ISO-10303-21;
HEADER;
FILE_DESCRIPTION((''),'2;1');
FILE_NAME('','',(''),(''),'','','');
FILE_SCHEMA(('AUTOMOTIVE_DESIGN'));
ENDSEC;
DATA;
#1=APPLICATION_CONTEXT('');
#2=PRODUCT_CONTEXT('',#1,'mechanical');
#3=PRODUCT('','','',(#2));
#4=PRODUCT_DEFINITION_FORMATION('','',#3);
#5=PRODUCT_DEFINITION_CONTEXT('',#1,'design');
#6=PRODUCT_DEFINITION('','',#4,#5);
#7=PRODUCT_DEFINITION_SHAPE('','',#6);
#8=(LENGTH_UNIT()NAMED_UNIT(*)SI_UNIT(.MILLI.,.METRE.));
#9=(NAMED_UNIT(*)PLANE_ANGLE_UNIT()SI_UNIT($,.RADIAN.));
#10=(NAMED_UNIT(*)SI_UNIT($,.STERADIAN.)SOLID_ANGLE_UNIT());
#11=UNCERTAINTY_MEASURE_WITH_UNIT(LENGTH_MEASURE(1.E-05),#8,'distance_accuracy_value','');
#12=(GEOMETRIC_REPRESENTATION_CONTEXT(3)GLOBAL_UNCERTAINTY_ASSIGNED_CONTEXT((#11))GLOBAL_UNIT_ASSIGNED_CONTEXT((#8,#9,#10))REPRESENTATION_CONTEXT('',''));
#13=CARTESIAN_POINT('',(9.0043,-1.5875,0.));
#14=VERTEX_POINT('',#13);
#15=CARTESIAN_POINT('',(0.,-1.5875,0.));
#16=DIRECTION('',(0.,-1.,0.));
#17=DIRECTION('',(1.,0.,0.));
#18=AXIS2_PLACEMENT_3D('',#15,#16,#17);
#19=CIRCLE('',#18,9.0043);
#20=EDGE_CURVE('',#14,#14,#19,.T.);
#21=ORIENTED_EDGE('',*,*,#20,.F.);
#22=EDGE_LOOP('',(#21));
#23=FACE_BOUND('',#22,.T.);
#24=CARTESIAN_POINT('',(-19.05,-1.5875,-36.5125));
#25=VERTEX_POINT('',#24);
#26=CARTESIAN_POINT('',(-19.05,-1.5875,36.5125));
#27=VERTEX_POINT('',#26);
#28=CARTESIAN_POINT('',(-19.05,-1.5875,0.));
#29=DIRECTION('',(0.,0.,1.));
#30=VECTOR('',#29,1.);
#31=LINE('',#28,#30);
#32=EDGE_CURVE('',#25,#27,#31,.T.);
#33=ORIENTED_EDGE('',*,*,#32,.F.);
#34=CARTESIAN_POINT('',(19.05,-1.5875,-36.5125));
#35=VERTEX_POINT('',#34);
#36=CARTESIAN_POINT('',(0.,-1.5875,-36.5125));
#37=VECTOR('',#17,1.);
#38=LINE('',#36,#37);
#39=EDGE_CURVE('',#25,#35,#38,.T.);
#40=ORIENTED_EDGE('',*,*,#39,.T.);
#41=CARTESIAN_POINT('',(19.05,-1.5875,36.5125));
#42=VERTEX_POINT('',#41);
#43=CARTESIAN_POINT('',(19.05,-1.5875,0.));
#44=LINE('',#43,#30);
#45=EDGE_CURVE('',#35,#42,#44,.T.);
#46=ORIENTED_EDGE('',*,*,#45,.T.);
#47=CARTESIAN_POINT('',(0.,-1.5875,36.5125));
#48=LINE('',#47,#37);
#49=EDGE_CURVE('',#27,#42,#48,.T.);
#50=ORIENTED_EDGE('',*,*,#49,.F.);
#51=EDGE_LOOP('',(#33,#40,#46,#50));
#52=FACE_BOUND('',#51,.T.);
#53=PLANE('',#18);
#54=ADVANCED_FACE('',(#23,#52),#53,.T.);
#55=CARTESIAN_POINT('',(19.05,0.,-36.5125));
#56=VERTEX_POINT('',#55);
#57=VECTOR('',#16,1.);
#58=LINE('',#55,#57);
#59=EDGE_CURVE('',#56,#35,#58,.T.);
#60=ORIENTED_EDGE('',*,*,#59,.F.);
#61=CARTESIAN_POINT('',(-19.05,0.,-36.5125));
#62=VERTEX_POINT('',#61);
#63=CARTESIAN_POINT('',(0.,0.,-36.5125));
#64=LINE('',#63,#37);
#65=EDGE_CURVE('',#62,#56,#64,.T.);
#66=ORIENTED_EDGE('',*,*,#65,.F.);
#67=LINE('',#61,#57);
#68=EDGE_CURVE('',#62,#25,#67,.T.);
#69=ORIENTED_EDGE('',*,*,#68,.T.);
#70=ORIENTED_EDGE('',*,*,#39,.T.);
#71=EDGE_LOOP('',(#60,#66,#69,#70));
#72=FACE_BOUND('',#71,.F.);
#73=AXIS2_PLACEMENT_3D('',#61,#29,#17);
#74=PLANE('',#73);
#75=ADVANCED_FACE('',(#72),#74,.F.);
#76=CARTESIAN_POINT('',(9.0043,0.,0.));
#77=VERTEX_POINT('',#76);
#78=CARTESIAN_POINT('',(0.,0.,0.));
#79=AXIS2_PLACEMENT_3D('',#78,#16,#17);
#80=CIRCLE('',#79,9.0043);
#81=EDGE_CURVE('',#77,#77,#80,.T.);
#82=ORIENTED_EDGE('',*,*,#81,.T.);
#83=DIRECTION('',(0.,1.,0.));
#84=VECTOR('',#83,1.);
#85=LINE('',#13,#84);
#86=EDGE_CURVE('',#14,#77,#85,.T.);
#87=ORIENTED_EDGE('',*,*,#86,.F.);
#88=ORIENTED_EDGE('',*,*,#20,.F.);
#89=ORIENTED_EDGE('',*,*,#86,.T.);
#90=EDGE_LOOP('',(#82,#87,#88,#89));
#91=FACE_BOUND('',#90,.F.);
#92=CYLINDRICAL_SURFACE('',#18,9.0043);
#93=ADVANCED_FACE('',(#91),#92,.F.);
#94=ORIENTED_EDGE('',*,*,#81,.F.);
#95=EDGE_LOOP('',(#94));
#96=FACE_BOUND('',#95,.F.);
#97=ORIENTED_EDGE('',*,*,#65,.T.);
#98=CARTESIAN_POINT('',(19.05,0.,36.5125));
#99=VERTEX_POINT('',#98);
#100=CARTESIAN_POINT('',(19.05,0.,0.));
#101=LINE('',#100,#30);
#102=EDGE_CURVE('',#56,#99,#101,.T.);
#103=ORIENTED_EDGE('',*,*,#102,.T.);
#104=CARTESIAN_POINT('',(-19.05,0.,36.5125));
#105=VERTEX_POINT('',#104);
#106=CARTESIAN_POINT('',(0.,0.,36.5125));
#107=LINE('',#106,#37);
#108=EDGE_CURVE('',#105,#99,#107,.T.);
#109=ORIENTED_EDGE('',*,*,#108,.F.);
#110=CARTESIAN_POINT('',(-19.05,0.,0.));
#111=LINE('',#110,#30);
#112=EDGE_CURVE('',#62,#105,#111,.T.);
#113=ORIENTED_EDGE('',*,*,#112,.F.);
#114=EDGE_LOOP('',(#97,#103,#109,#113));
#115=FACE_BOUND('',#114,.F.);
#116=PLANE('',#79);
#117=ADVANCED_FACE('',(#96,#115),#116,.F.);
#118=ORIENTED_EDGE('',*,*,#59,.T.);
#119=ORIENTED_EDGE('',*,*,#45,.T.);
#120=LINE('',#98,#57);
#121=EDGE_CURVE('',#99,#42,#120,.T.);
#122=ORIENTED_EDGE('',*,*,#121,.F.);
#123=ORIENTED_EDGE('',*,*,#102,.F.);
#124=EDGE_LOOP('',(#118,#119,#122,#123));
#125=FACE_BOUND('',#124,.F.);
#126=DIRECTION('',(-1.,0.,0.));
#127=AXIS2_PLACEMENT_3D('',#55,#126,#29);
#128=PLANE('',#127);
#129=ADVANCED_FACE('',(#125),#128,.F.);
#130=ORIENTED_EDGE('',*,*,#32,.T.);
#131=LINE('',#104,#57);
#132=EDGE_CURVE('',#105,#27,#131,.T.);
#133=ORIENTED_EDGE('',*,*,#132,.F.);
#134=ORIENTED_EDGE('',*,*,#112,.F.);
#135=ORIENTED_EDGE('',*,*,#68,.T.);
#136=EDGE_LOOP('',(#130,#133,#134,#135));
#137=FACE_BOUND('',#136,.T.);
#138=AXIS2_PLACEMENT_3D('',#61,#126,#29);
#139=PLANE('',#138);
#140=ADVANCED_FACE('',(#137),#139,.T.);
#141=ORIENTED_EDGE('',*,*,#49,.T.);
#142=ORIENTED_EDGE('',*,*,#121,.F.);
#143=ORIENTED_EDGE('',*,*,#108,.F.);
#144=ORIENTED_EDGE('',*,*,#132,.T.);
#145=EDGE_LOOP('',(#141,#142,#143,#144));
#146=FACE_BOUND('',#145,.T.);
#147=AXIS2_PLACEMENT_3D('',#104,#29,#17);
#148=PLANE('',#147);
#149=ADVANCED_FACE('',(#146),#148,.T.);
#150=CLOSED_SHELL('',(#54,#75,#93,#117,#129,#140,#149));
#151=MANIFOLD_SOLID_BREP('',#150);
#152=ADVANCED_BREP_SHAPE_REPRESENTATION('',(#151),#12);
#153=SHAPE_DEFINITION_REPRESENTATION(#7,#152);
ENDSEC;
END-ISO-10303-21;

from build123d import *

# Parameters (mm, degrees)
F0_W     = 38.1
F0_H     = 73.025
F1_DEPTH = 1.5875
F2_R     = 9.0043
F3_DEPTH = 25.4


# Not quite as in the source:
# - a length typed as a fraction of an inch, garbled in the dataset ("3 / 203.2 mm" for 3/8 in), is restored


with BuildPart() as f1:
    # F0 (on Front) → F1 (new body)
    with BuildSketch(Plane.XZ):
        Rectangle(F0_W, F0_H)
    extrude(amount=F1_DEPTH)

    # F2 (on face) → F3 (cut)
    with BuildSketch(Plane.XZ.offset(1.5875)):
        Circle(F2_R)
    extrude(amount=-F3_DEPTH, mode=Mode.SUBTRACT)


solid = f1.part
